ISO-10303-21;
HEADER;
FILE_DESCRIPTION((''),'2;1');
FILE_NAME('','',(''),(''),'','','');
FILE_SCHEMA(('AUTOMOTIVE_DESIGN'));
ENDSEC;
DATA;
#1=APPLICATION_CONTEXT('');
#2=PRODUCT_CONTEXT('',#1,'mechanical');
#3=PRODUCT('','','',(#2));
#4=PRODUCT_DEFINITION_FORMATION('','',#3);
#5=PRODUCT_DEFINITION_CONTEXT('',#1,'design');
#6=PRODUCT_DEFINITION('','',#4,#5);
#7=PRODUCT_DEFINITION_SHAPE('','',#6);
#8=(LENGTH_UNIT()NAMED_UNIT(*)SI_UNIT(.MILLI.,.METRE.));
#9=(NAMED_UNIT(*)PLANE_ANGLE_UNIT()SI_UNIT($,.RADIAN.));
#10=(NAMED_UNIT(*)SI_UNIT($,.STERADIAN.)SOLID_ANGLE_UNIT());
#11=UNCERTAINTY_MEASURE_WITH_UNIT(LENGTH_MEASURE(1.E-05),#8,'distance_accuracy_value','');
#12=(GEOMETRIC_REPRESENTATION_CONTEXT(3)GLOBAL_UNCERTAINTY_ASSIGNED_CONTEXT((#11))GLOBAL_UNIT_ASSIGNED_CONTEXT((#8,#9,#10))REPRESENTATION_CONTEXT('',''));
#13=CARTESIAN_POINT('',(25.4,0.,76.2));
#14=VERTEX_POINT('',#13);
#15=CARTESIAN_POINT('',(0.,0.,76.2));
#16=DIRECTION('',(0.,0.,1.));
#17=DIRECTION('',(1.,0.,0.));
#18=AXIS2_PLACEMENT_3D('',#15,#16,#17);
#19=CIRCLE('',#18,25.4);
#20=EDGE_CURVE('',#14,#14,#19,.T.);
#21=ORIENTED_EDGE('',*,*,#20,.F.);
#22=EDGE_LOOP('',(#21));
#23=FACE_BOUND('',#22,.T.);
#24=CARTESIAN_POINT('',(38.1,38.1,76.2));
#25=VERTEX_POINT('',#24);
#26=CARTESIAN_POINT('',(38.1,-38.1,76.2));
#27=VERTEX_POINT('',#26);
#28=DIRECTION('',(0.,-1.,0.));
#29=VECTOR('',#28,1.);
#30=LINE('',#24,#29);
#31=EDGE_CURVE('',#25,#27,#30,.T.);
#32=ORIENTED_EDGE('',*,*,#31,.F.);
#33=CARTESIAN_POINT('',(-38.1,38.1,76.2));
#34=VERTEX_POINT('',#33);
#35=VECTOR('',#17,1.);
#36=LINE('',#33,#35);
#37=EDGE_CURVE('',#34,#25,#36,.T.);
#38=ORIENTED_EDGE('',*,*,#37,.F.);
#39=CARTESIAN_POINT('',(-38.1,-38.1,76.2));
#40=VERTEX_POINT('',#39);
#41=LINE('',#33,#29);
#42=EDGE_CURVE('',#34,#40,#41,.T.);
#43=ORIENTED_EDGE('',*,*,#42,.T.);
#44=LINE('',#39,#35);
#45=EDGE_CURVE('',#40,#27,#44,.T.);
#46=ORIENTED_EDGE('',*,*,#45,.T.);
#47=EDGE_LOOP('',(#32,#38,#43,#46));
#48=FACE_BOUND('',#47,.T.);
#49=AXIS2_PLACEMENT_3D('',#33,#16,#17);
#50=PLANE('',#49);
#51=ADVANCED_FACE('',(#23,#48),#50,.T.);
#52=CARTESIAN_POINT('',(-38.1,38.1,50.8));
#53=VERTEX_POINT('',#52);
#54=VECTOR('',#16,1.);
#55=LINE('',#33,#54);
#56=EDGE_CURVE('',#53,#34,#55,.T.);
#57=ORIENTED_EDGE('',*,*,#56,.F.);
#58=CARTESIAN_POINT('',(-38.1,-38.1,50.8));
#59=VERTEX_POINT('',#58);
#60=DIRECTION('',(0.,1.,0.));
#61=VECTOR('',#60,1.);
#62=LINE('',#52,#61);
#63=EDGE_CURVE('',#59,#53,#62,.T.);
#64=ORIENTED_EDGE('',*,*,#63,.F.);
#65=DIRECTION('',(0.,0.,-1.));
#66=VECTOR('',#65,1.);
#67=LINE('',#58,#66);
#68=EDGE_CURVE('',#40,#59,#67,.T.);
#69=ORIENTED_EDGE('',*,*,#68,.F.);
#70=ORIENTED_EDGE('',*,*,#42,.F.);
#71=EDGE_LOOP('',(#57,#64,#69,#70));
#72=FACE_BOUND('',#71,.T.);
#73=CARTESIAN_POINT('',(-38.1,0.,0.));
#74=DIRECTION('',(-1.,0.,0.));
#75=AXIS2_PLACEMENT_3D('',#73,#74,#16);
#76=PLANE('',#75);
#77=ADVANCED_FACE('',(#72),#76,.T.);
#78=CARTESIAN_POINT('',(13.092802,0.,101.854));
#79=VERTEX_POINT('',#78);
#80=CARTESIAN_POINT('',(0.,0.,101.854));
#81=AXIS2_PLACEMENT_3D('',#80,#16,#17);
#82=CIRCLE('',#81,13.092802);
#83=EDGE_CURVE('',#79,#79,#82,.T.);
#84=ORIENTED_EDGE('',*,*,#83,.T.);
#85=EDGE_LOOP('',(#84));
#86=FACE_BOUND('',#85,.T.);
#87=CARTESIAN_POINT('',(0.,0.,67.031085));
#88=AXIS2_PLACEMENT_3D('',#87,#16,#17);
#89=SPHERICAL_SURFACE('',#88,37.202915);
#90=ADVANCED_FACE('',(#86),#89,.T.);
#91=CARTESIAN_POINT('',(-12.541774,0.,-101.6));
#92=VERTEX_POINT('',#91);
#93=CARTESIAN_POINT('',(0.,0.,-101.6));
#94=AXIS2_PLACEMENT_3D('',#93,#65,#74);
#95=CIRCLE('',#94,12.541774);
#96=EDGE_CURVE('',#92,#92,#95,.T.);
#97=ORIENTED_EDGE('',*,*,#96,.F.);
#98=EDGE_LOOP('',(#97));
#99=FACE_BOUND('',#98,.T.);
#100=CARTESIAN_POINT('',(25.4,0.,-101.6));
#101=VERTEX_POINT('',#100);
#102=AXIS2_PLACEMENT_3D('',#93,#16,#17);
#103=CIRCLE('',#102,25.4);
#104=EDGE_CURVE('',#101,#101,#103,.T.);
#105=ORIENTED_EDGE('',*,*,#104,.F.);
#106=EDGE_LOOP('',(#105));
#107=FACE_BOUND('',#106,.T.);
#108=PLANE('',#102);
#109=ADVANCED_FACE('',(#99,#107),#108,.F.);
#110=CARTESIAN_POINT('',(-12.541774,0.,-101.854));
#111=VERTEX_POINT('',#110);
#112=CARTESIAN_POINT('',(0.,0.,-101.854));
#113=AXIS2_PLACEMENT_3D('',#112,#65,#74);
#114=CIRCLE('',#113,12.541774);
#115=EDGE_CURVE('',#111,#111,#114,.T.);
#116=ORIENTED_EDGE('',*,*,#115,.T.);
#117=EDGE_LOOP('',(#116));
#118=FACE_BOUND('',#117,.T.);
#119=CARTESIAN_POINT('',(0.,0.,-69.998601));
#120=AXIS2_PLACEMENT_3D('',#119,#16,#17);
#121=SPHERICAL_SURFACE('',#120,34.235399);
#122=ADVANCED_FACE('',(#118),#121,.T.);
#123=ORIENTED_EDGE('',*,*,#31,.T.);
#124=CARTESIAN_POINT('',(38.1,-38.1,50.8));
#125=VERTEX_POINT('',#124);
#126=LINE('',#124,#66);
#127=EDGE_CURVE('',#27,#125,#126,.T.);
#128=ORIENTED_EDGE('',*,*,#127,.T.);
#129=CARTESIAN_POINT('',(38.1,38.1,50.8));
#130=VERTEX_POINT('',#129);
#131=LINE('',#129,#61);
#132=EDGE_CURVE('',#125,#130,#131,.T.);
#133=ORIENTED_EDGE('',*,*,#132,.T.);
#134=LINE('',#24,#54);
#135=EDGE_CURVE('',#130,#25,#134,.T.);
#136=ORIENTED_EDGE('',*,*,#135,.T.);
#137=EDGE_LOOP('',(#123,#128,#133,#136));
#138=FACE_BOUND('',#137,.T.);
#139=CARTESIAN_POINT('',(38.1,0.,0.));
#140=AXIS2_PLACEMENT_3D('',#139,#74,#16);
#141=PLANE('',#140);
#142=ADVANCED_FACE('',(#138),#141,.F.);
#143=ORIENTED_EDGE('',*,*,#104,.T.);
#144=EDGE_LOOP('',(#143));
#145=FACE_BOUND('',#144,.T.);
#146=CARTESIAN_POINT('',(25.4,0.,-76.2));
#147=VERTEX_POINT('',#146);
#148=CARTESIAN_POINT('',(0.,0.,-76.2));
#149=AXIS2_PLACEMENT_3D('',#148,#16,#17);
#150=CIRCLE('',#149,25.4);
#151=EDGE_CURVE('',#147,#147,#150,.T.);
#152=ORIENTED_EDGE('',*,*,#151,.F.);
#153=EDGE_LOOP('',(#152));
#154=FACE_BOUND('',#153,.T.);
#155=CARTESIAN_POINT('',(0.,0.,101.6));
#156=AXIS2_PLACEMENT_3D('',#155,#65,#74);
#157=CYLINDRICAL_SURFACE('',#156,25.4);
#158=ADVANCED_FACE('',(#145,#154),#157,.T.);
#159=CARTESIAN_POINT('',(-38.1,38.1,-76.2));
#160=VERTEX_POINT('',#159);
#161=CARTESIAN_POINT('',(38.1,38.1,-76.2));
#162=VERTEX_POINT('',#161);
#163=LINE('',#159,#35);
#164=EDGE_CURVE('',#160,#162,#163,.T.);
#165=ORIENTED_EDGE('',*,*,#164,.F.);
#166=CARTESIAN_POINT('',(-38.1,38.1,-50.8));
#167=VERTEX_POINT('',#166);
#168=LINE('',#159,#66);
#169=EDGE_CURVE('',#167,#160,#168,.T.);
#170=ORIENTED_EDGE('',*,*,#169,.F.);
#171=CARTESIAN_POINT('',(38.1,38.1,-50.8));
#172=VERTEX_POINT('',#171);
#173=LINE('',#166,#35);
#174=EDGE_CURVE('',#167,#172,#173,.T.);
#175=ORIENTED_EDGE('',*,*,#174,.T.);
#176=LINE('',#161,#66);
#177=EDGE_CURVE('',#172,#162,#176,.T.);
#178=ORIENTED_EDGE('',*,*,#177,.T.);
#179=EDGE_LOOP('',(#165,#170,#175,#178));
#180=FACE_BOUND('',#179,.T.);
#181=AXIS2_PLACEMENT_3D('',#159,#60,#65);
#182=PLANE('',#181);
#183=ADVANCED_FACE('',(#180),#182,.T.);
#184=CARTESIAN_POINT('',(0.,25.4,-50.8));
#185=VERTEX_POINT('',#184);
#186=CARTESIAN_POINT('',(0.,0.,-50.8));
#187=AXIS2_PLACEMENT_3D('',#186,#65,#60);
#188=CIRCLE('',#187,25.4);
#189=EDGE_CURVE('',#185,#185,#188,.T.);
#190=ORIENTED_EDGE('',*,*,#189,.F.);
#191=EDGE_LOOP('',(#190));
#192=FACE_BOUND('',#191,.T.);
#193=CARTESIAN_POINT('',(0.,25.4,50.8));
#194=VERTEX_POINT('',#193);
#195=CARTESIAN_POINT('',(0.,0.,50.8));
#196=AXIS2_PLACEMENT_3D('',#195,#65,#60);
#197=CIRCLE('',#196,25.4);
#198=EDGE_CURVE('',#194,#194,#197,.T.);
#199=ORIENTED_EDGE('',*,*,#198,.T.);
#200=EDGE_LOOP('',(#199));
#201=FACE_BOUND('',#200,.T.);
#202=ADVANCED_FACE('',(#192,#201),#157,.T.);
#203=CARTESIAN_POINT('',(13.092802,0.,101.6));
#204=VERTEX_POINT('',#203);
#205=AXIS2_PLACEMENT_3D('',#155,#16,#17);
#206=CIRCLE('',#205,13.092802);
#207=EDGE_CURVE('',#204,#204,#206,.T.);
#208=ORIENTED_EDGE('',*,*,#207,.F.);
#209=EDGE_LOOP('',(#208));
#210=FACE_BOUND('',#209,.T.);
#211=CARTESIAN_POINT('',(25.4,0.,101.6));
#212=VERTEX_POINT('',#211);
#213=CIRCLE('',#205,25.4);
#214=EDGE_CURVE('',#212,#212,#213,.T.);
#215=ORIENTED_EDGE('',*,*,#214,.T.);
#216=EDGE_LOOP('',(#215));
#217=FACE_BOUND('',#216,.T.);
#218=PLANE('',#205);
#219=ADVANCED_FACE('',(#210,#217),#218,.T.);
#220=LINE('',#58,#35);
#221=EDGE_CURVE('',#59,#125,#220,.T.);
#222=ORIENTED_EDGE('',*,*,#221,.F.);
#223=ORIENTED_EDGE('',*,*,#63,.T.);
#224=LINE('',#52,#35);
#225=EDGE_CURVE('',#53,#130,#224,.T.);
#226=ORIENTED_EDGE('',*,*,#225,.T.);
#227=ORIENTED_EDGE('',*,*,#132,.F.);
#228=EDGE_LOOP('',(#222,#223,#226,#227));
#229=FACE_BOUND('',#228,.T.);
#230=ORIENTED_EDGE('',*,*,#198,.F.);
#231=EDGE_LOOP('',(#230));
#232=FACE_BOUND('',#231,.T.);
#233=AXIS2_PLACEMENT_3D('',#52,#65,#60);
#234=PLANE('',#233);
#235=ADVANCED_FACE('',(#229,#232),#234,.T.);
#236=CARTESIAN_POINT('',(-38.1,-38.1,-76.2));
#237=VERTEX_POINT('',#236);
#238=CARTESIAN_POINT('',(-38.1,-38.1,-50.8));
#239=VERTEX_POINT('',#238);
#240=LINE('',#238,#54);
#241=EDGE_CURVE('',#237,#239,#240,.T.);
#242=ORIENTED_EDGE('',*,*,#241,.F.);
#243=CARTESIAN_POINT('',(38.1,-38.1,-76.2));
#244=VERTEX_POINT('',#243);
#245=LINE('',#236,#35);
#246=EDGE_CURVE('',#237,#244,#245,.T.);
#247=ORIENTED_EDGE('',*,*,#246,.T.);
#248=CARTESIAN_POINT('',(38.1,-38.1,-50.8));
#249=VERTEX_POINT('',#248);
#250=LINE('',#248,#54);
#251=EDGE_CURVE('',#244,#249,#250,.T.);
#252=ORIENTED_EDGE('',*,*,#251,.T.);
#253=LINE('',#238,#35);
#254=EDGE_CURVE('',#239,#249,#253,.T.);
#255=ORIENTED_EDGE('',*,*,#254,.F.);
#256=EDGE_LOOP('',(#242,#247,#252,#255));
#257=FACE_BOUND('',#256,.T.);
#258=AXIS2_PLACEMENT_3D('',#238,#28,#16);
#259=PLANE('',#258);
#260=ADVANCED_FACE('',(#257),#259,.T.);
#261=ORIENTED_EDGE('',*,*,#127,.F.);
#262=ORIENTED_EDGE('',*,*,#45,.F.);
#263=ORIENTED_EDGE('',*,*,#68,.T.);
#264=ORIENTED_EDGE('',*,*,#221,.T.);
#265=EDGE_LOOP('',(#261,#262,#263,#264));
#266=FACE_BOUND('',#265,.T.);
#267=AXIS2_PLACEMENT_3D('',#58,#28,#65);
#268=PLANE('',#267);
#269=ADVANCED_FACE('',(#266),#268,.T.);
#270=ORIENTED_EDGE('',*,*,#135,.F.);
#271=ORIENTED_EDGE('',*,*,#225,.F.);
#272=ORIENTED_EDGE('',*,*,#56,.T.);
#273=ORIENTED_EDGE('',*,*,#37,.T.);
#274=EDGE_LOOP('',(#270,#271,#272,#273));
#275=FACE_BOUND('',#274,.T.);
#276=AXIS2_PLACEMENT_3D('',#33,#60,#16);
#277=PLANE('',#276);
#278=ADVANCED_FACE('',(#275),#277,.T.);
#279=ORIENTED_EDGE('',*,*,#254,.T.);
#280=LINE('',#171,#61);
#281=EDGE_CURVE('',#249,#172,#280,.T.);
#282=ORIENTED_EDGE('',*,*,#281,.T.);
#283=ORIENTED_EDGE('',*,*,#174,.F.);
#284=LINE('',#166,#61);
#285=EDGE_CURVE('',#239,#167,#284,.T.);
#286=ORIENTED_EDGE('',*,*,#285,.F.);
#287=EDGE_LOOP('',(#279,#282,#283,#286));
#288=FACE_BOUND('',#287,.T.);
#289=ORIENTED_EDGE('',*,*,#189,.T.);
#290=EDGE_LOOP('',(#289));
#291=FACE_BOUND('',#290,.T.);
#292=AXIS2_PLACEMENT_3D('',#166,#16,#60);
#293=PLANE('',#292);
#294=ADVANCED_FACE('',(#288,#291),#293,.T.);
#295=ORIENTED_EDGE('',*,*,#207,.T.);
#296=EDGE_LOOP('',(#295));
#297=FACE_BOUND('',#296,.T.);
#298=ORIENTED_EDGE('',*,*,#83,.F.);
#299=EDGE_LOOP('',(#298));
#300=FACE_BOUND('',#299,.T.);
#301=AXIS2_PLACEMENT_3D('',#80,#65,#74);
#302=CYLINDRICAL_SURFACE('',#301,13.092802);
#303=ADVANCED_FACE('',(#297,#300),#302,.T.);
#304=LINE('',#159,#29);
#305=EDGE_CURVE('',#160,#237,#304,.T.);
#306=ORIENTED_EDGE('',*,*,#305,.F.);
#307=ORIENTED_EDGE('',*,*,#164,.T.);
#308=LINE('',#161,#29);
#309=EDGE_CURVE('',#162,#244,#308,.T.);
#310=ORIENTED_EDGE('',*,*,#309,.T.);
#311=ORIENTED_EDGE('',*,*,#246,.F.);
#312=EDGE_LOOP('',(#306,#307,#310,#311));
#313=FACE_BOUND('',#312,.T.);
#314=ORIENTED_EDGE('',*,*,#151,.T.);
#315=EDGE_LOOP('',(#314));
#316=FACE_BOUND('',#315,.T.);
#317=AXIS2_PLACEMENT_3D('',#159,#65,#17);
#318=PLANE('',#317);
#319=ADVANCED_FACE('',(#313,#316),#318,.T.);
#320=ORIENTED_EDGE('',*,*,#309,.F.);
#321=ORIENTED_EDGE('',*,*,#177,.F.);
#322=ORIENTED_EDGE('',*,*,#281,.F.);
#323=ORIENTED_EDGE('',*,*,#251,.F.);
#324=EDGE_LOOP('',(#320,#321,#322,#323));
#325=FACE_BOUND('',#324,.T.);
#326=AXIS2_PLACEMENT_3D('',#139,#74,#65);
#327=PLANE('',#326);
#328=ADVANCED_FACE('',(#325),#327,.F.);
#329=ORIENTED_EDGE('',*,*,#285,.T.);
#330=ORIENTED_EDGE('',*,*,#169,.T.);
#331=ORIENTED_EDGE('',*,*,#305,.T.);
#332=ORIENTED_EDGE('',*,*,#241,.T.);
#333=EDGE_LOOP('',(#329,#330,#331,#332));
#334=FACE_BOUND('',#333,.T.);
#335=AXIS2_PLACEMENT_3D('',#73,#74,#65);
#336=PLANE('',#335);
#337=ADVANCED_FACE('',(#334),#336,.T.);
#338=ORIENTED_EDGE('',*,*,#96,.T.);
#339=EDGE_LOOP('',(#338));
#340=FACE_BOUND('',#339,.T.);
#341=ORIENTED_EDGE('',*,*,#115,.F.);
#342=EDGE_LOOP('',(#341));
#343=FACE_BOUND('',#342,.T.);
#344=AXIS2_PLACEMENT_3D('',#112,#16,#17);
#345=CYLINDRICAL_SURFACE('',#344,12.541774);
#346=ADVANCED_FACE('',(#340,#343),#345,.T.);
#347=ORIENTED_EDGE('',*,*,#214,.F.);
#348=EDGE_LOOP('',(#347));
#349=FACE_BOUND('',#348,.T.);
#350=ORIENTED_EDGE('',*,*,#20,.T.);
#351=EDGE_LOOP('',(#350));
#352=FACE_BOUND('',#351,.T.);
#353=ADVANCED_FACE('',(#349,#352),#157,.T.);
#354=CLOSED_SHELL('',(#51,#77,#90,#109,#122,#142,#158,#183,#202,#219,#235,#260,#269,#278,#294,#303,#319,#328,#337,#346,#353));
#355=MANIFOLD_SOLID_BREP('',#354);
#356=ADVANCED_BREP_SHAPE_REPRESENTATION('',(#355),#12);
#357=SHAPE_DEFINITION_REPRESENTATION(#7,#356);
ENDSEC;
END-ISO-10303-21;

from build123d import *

# Parameters (mm, degrees)
SKETCH1_R           = 25.4
BOSS_EXTRUDE1_DEPTH = 101.6
SKETCH8_W           = 25.4
SKETCH8_H           = 76.2
BOSS_EXTRUDE2_DEPTH = 76.2
SKETCH9_R           = 13.092802434
BOSS_EXTRUDE3_DEPTH = 0.254
DOME1_FACE_RADIUS   = 13.092802434
DOME1_HEIGHT        = 2.38
SKETCH10_R          = 12.541774092
BOSS_EXTRUDE4_DEPTH = 0.254


# Read off the part's stored shape, not the designer's step: Dome2
with BuildPart() as part:
    # Sketch1 → Boss-Extrude1 (new, symmetric)
    with BuildSketch(Plane.XY):
        Circle(SKETCH1_R)
    extrude(amount=BOSS_EXTRUDE1_DEPTH, both=True)

    # Sketch8 → Boss-Extrude2 (add)
    with BuildSketch(Plane(origin=(38.1, 0, 0), x_dir=(0, 0, -1), z_dir=(1, 0, 0))):
        with Locations((-63.5, 0)):
            Rectangle(SKETCH8_W, SKETCH8_H)
    extrude(amount=-BOSS_EXTRUDE2_DEPTH)

    # Mirror1: part across plane


with BuildPart() as part_1:
    add(part.part)
    add(part.part.mirror(Plane.XY))

    # Sketch9 → Boss-Extrude3 (add)
    with BuildSketch(Plane.XY.offset(101.6)):
        Circle(SKETCH9_R)
    extrude(amount=BOSS_EXTRUDE3_DEPTH)

    # Dome1: a dome of height H over a round flat face of radius A is a cap of a sphere of radius (A * A + H * H) / (2 * H)
    dome1_r = (DOME1_FACE_RADIUS * DOME1_FACE_RADIUS + DOME1_HEIGHT * DOME1_HEIGHT) / (2 * DOME1_HEIGHT)
    dome1_base = Plane((0, 0, 101.854), z_dir=(0, 0, 1))
    with Locations(dome1_base.offset(DOME1_HEIGHT - dome1_r)):
        dome1_ball = Sphere(dome1_r, mode=Mode.PRIVATE)
    add(split(dome1_ball, bisect_by=dome1_base, keep=Keep.TOP, mode=Mode.PRIVATE))

    # Sketch10 → Boss-Extrude4 (add)
    with BuildSketch(Plane(origin=(0, 0, -101.6), x_dir=(-1, 0, 0), z_dir=(0, 0, -1))):
        Circle(SKETCH10_R)
    extrude(amount=BOSS_EXTRUDE4_DEPTH)

    # Dome2 outline → Dome2 (revolve)
    with BuildSketch(Plane.XZ):
        with BuildLine():
            Line((0, -101.853999987), (0, -104.234))
            ThreePointArc((0, -104.234), (6.382799116, -103.633737683), (12.541774124, -101.853999987))
            Line((12.541774124, -101.853999987), (0, -101.853999987))
        make_face()
    revolve(axis=Axis((0, 0, 0), (0, 0, 1)))


solid = part_1.part
